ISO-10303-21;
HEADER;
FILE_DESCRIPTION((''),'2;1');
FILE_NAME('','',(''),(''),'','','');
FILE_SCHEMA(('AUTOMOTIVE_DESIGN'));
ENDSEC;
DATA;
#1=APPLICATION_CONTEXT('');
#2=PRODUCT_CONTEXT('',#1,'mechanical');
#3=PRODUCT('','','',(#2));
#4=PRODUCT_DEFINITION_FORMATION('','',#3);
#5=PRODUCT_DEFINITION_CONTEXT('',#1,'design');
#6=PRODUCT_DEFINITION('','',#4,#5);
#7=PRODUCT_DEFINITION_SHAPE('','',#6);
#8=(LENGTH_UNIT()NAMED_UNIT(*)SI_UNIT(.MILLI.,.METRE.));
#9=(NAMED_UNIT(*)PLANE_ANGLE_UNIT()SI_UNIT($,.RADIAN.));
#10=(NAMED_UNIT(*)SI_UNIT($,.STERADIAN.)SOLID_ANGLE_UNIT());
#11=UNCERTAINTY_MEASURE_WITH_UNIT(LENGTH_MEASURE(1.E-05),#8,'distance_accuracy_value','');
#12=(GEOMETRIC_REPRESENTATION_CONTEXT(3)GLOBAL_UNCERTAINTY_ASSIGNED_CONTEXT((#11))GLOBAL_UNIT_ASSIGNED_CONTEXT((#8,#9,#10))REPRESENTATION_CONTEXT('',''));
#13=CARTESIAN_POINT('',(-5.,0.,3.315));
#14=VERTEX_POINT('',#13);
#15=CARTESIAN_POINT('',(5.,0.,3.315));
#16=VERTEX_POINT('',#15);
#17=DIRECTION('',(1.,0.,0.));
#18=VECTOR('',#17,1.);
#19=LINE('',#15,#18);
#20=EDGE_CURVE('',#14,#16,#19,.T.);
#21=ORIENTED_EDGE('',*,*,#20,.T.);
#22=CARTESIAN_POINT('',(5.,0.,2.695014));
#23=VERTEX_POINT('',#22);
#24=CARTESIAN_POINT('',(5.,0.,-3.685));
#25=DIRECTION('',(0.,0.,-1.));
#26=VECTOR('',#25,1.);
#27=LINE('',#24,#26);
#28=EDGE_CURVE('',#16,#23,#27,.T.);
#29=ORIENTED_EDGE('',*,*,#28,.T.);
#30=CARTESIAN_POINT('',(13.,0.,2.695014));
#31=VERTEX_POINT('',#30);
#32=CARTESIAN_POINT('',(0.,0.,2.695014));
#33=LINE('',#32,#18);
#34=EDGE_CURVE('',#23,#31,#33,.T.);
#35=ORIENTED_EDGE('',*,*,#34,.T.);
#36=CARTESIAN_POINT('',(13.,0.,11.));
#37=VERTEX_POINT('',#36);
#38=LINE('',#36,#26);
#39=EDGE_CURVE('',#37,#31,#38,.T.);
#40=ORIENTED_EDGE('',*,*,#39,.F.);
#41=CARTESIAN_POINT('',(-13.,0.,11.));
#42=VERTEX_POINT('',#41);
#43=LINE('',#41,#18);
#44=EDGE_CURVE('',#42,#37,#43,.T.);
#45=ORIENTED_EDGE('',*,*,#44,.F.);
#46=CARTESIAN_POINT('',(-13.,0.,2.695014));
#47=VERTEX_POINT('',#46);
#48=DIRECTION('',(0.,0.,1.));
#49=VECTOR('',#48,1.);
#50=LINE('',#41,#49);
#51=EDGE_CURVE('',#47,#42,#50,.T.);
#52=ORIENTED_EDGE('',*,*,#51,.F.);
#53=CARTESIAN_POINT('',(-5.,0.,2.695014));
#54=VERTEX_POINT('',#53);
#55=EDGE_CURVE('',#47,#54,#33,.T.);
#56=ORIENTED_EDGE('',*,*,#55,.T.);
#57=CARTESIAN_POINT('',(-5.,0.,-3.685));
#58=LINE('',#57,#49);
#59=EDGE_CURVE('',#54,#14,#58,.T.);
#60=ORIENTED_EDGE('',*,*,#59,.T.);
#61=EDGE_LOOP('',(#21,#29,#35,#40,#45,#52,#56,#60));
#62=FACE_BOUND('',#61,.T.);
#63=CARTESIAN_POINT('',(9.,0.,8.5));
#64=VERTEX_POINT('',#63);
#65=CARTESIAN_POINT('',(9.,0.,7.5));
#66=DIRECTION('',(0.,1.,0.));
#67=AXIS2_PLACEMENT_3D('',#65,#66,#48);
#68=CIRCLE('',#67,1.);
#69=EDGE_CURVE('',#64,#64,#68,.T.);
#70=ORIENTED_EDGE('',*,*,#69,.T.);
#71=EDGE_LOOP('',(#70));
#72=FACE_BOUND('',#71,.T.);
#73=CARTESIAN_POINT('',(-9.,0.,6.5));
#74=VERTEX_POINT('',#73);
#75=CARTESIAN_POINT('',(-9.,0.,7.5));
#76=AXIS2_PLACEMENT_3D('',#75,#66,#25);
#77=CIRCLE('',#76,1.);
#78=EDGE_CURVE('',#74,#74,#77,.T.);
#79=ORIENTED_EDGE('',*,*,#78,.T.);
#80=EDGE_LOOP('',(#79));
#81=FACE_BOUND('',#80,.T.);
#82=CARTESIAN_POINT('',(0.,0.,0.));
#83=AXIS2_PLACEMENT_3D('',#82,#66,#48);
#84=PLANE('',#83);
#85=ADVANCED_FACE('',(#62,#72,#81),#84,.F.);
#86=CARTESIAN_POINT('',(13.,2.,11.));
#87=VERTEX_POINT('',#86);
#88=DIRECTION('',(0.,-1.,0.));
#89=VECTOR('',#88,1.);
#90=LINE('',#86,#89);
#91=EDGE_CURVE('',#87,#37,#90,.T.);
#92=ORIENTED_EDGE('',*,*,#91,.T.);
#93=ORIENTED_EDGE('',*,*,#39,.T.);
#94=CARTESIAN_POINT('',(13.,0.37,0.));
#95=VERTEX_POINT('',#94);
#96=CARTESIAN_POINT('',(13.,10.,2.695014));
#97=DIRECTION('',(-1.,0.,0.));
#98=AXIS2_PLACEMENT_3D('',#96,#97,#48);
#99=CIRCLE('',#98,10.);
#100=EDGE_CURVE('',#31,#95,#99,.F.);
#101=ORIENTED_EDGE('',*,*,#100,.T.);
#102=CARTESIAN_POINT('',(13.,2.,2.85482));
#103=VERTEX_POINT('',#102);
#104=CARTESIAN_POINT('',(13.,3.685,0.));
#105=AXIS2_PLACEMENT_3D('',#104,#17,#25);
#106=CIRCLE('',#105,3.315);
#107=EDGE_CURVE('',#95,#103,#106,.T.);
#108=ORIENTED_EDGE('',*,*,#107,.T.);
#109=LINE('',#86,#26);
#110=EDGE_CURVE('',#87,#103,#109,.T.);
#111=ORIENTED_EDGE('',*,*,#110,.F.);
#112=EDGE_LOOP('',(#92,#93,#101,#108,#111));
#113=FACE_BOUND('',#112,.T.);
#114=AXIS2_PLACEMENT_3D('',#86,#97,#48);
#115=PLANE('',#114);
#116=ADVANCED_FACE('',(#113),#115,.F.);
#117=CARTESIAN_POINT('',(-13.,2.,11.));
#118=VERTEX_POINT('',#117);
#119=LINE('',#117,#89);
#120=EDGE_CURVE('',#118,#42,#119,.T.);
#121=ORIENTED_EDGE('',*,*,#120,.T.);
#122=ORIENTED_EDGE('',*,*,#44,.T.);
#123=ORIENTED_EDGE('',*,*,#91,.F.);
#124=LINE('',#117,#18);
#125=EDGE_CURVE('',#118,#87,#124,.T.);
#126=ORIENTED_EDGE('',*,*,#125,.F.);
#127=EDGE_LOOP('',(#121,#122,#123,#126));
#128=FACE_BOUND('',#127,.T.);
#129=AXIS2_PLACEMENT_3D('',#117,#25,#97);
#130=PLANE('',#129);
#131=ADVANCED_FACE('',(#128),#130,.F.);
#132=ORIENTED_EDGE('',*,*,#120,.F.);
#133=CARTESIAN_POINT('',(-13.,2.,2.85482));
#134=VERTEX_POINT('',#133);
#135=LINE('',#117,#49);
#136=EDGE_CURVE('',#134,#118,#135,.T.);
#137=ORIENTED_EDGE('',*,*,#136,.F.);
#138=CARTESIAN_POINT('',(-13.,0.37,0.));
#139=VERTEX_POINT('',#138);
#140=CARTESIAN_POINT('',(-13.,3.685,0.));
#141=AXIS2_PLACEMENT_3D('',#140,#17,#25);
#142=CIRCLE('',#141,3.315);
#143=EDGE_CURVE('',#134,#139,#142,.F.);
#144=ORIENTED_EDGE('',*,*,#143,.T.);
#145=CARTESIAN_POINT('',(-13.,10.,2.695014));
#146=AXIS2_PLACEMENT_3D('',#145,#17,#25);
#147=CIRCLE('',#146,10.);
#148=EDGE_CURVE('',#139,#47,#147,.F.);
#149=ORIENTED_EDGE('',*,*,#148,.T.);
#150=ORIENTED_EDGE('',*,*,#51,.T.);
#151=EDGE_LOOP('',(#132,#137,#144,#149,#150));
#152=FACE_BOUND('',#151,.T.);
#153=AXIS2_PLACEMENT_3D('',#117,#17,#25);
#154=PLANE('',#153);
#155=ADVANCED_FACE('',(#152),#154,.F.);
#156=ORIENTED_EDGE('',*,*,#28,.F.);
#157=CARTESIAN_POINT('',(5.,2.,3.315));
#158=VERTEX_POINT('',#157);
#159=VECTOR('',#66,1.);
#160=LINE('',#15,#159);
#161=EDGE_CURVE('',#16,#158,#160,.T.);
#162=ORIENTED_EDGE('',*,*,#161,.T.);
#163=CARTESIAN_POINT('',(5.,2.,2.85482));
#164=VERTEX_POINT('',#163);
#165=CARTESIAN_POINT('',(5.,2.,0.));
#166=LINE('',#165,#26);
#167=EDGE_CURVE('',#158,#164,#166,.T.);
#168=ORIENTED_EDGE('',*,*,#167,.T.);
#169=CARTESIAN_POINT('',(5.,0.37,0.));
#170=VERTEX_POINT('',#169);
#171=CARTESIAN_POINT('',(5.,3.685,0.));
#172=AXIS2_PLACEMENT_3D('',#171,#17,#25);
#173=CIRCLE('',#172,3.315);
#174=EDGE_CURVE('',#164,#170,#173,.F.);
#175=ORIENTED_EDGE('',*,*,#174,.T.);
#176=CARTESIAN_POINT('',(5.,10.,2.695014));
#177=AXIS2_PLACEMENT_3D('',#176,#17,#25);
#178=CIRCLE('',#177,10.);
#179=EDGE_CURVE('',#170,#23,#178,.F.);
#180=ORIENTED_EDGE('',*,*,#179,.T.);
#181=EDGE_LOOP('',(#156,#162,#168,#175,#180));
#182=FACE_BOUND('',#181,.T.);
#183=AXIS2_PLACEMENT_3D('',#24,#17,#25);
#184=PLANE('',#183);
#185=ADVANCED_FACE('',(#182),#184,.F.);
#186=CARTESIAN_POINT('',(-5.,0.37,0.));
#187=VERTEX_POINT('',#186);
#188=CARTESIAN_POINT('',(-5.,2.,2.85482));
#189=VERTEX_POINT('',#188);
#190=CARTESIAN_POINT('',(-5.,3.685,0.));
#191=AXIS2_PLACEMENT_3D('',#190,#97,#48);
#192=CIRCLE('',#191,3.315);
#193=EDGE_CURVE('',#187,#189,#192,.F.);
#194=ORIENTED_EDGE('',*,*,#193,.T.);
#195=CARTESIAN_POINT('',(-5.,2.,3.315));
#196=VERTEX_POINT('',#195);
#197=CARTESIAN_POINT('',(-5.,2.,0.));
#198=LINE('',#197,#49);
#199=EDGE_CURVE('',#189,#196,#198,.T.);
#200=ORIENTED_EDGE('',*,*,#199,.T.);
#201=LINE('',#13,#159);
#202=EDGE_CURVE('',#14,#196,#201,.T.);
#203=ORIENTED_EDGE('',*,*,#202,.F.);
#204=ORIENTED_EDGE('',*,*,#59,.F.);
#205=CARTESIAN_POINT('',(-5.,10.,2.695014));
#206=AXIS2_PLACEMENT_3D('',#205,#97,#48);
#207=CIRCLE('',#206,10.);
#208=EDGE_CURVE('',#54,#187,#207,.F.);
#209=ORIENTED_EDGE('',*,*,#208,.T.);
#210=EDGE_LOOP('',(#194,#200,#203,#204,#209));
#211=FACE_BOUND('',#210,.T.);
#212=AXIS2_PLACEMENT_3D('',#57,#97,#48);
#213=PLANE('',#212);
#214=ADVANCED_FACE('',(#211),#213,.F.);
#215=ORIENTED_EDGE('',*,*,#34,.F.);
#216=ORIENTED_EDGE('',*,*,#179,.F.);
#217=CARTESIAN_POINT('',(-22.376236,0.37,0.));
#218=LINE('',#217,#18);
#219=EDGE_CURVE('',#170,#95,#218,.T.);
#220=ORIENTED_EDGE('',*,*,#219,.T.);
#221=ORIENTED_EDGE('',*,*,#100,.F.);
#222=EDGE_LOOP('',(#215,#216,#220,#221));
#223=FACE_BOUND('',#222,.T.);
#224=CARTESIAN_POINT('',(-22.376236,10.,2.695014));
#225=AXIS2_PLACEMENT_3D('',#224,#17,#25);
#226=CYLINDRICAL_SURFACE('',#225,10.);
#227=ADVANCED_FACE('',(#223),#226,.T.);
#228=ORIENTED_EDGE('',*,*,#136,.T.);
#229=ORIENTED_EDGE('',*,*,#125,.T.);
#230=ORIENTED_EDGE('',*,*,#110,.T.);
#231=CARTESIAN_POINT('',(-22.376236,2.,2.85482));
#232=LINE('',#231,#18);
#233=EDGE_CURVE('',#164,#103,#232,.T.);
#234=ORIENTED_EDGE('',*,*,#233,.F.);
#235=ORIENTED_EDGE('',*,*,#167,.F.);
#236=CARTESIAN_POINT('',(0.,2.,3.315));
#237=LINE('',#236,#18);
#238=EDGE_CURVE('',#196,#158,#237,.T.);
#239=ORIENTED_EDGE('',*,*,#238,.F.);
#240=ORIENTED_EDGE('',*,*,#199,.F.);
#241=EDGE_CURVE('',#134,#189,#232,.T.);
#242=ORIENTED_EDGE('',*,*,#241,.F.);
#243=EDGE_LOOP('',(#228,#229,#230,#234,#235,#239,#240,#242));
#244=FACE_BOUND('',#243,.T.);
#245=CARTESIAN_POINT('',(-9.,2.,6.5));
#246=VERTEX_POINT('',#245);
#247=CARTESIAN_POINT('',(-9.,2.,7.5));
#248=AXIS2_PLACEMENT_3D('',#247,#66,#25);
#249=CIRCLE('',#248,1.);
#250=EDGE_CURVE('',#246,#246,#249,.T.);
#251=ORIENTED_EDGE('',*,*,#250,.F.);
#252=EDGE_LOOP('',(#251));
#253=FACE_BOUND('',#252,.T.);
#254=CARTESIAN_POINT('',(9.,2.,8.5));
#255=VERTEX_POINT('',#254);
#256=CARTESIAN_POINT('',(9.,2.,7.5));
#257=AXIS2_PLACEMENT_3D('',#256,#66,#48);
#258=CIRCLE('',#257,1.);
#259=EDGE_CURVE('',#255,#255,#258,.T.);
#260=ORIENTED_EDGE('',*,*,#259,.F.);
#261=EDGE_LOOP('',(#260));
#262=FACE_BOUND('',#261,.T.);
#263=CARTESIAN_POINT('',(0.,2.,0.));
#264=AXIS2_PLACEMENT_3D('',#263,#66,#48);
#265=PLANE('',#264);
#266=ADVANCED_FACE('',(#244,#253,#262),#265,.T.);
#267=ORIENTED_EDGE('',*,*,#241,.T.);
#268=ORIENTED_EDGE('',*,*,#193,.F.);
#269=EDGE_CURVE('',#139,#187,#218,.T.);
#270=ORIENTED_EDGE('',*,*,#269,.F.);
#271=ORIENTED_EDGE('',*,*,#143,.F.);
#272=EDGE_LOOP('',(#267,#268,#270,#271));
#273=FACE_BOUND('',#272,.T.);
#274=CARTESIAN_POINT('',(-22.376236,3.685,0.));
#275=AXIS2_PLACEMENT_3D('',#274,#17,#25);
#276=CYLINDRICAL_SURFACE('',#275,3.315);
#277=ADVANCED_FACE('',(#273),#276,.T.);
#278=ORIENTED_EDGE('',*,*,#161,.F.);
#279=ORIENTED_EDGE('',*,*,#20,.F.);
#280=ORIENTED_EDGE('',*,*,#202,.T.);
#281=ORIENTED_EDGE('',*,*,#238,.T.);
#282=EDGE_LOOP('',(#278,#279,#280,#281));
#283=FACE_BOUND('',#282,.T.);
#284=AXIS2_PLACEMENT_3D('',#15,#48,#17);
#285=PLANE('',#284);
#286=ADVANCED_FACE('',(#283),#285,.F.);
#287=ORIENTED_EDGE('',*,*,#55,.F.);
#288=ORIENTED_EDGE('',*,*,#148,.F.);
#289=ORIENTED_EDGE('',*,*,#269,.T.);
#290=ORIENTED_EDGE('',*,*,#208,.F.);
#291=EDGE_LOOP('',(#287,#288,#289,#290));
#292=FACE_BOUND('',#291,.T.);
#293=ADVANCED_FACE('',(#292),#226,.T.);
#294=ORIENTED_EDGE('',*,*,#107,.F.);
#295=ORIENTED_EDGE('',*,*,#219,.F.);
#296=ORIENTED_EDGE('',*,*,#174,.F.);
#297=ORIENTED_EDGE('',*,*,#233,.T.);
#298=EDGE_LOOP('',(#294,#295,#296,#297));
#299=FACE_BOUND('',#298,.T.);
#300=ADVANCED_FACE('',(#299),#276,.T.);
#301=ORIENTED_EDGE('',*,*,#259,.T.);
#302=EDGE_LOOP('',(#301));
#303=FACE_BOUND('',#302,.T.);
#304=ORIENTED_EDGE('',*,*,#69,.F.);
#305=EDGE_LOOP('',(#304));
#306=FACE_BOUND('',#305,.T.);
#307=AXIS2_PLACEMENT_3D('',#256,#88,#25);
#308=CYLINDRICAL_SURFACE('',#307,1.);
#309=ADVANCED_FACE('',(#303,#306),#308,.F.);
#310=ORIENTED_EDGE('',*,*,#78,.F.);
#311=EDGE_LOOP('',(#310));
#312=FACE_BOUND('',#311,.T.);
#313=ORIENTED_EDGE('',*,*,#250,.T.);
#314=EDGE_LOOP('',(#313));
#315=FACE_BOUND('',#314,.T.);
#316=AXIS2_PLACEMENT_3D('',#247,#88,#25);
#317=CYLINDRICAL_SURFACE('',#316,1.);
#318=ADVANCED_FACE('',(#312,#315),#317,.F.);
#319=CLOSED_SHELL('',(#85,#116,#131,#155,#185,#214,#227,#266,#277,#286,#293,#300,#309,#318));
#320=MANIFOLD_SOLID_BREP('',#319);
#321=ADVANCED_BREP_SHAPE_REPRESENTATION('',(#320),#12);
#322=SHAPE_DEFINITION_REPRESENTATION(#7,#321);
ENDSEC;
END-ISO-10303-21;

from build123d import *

# Parameters (mm, degrees)
SKETCH_1_W               = 26
SKETCH_1_H               = 11
SKETCH_1_R               = 1
EXTRUDE_1_DEPTH          = 2
SKETCH_2_R               = 3.315
EXTRUDE_2_DEPTH          = 26
FILLET_1_R               = 10
CUT_EXTRUDE_1_DEPTH      = 18.748239349
CUT_EXTRUDE_1_DEPTH_BACK = 18.748239349
SKETCH_3_W               = 10
SKETCH_3_H               = 7


with BuildPart() as part:
    # 草图1 → 凸台-拉伸1 (new body)
    with BuildSketch(Plane(origin=(0, 0, 0), x_dir=(1, 0, 0), z_dir=(0, 1, 0))):
        with Locations((0, -5.5)):
            Rectangle(SKETCH_1_W, SKETCH_1_H)
        with Locations(Location((9, -7.5, 0), (0, 0, 270))):
            Circle(SKETCH_1_R, mode=Mode.SUBTRACT)
        with Locations(Location((-9, -7.5, 0), (0, 0, 90))):
            Circle(SKETCH_1_R, mode=Mode.SUBTRACT)
    extrude(amount=EXTRUDE_1_DEPTH)

    # 草图2 → 凸台-拉伸2 (add)
    with BuildSketch(Plane(origin=(13, 0, 0), x_dir=(0, 0, -1), z_dir=(1, 0, 0))):
        with Locations((0, 3.685)):
            Circle(SKETCH_2_R)
    extrude(amount=-EXTRUDE_2_DEPTH)

    # 圆角1
    # the kernel refuses this fillet: 10 mm, written as the material it takes off along each edge
    with BuildSketch(Plane(origin=(19.737534787, 0, 0), x_dir=(0, 1, 0), z_dir=(-1, 0, 0))) as fillet_1_piece_1:
        with BuildLine():
            CenterArc((10, -2.695013915), FILLET_1_R, 164.365401099, 15.634598901)
            Line((0, -2.695013915), (-0.2, -2.695013915))
            Line((-0.2, -2.695013915), (-0.2, 0))
            Line((-0.2, 0), (0, 0.2))
            ThreePointArc((0, 0.2), (0.185, 0.2), (0.1774, 0.053900278))
            Line((0.1774, 0.053900278), (0.37, 0))
        make_face()
    extrude(amount=39.475069573, mode=Mode.SUBTRACT)

    # 草图3 → 切除-拉伸1 (cut, two sides: drawn at the far end of the back side and taken through both)
    with BuildSketch(Plane(origin=(0, 2, 0), x_dir=(1, 0, 0), z_dir=(0, 1, 0)).offset(-CUT_EXTRUDE_1_DEPTH_BACK)):
        with Locations((0, 0.185)):
            Rectangle(SKETCH_3_W, SKETCH_3_H)
    extrude(amount=CUT_EXTRUDE_1_DEPTH + CUT_EXTRUDE_1_DEPTH_BACK, mode=Mode.SUBTRACT)


solid = part.part
